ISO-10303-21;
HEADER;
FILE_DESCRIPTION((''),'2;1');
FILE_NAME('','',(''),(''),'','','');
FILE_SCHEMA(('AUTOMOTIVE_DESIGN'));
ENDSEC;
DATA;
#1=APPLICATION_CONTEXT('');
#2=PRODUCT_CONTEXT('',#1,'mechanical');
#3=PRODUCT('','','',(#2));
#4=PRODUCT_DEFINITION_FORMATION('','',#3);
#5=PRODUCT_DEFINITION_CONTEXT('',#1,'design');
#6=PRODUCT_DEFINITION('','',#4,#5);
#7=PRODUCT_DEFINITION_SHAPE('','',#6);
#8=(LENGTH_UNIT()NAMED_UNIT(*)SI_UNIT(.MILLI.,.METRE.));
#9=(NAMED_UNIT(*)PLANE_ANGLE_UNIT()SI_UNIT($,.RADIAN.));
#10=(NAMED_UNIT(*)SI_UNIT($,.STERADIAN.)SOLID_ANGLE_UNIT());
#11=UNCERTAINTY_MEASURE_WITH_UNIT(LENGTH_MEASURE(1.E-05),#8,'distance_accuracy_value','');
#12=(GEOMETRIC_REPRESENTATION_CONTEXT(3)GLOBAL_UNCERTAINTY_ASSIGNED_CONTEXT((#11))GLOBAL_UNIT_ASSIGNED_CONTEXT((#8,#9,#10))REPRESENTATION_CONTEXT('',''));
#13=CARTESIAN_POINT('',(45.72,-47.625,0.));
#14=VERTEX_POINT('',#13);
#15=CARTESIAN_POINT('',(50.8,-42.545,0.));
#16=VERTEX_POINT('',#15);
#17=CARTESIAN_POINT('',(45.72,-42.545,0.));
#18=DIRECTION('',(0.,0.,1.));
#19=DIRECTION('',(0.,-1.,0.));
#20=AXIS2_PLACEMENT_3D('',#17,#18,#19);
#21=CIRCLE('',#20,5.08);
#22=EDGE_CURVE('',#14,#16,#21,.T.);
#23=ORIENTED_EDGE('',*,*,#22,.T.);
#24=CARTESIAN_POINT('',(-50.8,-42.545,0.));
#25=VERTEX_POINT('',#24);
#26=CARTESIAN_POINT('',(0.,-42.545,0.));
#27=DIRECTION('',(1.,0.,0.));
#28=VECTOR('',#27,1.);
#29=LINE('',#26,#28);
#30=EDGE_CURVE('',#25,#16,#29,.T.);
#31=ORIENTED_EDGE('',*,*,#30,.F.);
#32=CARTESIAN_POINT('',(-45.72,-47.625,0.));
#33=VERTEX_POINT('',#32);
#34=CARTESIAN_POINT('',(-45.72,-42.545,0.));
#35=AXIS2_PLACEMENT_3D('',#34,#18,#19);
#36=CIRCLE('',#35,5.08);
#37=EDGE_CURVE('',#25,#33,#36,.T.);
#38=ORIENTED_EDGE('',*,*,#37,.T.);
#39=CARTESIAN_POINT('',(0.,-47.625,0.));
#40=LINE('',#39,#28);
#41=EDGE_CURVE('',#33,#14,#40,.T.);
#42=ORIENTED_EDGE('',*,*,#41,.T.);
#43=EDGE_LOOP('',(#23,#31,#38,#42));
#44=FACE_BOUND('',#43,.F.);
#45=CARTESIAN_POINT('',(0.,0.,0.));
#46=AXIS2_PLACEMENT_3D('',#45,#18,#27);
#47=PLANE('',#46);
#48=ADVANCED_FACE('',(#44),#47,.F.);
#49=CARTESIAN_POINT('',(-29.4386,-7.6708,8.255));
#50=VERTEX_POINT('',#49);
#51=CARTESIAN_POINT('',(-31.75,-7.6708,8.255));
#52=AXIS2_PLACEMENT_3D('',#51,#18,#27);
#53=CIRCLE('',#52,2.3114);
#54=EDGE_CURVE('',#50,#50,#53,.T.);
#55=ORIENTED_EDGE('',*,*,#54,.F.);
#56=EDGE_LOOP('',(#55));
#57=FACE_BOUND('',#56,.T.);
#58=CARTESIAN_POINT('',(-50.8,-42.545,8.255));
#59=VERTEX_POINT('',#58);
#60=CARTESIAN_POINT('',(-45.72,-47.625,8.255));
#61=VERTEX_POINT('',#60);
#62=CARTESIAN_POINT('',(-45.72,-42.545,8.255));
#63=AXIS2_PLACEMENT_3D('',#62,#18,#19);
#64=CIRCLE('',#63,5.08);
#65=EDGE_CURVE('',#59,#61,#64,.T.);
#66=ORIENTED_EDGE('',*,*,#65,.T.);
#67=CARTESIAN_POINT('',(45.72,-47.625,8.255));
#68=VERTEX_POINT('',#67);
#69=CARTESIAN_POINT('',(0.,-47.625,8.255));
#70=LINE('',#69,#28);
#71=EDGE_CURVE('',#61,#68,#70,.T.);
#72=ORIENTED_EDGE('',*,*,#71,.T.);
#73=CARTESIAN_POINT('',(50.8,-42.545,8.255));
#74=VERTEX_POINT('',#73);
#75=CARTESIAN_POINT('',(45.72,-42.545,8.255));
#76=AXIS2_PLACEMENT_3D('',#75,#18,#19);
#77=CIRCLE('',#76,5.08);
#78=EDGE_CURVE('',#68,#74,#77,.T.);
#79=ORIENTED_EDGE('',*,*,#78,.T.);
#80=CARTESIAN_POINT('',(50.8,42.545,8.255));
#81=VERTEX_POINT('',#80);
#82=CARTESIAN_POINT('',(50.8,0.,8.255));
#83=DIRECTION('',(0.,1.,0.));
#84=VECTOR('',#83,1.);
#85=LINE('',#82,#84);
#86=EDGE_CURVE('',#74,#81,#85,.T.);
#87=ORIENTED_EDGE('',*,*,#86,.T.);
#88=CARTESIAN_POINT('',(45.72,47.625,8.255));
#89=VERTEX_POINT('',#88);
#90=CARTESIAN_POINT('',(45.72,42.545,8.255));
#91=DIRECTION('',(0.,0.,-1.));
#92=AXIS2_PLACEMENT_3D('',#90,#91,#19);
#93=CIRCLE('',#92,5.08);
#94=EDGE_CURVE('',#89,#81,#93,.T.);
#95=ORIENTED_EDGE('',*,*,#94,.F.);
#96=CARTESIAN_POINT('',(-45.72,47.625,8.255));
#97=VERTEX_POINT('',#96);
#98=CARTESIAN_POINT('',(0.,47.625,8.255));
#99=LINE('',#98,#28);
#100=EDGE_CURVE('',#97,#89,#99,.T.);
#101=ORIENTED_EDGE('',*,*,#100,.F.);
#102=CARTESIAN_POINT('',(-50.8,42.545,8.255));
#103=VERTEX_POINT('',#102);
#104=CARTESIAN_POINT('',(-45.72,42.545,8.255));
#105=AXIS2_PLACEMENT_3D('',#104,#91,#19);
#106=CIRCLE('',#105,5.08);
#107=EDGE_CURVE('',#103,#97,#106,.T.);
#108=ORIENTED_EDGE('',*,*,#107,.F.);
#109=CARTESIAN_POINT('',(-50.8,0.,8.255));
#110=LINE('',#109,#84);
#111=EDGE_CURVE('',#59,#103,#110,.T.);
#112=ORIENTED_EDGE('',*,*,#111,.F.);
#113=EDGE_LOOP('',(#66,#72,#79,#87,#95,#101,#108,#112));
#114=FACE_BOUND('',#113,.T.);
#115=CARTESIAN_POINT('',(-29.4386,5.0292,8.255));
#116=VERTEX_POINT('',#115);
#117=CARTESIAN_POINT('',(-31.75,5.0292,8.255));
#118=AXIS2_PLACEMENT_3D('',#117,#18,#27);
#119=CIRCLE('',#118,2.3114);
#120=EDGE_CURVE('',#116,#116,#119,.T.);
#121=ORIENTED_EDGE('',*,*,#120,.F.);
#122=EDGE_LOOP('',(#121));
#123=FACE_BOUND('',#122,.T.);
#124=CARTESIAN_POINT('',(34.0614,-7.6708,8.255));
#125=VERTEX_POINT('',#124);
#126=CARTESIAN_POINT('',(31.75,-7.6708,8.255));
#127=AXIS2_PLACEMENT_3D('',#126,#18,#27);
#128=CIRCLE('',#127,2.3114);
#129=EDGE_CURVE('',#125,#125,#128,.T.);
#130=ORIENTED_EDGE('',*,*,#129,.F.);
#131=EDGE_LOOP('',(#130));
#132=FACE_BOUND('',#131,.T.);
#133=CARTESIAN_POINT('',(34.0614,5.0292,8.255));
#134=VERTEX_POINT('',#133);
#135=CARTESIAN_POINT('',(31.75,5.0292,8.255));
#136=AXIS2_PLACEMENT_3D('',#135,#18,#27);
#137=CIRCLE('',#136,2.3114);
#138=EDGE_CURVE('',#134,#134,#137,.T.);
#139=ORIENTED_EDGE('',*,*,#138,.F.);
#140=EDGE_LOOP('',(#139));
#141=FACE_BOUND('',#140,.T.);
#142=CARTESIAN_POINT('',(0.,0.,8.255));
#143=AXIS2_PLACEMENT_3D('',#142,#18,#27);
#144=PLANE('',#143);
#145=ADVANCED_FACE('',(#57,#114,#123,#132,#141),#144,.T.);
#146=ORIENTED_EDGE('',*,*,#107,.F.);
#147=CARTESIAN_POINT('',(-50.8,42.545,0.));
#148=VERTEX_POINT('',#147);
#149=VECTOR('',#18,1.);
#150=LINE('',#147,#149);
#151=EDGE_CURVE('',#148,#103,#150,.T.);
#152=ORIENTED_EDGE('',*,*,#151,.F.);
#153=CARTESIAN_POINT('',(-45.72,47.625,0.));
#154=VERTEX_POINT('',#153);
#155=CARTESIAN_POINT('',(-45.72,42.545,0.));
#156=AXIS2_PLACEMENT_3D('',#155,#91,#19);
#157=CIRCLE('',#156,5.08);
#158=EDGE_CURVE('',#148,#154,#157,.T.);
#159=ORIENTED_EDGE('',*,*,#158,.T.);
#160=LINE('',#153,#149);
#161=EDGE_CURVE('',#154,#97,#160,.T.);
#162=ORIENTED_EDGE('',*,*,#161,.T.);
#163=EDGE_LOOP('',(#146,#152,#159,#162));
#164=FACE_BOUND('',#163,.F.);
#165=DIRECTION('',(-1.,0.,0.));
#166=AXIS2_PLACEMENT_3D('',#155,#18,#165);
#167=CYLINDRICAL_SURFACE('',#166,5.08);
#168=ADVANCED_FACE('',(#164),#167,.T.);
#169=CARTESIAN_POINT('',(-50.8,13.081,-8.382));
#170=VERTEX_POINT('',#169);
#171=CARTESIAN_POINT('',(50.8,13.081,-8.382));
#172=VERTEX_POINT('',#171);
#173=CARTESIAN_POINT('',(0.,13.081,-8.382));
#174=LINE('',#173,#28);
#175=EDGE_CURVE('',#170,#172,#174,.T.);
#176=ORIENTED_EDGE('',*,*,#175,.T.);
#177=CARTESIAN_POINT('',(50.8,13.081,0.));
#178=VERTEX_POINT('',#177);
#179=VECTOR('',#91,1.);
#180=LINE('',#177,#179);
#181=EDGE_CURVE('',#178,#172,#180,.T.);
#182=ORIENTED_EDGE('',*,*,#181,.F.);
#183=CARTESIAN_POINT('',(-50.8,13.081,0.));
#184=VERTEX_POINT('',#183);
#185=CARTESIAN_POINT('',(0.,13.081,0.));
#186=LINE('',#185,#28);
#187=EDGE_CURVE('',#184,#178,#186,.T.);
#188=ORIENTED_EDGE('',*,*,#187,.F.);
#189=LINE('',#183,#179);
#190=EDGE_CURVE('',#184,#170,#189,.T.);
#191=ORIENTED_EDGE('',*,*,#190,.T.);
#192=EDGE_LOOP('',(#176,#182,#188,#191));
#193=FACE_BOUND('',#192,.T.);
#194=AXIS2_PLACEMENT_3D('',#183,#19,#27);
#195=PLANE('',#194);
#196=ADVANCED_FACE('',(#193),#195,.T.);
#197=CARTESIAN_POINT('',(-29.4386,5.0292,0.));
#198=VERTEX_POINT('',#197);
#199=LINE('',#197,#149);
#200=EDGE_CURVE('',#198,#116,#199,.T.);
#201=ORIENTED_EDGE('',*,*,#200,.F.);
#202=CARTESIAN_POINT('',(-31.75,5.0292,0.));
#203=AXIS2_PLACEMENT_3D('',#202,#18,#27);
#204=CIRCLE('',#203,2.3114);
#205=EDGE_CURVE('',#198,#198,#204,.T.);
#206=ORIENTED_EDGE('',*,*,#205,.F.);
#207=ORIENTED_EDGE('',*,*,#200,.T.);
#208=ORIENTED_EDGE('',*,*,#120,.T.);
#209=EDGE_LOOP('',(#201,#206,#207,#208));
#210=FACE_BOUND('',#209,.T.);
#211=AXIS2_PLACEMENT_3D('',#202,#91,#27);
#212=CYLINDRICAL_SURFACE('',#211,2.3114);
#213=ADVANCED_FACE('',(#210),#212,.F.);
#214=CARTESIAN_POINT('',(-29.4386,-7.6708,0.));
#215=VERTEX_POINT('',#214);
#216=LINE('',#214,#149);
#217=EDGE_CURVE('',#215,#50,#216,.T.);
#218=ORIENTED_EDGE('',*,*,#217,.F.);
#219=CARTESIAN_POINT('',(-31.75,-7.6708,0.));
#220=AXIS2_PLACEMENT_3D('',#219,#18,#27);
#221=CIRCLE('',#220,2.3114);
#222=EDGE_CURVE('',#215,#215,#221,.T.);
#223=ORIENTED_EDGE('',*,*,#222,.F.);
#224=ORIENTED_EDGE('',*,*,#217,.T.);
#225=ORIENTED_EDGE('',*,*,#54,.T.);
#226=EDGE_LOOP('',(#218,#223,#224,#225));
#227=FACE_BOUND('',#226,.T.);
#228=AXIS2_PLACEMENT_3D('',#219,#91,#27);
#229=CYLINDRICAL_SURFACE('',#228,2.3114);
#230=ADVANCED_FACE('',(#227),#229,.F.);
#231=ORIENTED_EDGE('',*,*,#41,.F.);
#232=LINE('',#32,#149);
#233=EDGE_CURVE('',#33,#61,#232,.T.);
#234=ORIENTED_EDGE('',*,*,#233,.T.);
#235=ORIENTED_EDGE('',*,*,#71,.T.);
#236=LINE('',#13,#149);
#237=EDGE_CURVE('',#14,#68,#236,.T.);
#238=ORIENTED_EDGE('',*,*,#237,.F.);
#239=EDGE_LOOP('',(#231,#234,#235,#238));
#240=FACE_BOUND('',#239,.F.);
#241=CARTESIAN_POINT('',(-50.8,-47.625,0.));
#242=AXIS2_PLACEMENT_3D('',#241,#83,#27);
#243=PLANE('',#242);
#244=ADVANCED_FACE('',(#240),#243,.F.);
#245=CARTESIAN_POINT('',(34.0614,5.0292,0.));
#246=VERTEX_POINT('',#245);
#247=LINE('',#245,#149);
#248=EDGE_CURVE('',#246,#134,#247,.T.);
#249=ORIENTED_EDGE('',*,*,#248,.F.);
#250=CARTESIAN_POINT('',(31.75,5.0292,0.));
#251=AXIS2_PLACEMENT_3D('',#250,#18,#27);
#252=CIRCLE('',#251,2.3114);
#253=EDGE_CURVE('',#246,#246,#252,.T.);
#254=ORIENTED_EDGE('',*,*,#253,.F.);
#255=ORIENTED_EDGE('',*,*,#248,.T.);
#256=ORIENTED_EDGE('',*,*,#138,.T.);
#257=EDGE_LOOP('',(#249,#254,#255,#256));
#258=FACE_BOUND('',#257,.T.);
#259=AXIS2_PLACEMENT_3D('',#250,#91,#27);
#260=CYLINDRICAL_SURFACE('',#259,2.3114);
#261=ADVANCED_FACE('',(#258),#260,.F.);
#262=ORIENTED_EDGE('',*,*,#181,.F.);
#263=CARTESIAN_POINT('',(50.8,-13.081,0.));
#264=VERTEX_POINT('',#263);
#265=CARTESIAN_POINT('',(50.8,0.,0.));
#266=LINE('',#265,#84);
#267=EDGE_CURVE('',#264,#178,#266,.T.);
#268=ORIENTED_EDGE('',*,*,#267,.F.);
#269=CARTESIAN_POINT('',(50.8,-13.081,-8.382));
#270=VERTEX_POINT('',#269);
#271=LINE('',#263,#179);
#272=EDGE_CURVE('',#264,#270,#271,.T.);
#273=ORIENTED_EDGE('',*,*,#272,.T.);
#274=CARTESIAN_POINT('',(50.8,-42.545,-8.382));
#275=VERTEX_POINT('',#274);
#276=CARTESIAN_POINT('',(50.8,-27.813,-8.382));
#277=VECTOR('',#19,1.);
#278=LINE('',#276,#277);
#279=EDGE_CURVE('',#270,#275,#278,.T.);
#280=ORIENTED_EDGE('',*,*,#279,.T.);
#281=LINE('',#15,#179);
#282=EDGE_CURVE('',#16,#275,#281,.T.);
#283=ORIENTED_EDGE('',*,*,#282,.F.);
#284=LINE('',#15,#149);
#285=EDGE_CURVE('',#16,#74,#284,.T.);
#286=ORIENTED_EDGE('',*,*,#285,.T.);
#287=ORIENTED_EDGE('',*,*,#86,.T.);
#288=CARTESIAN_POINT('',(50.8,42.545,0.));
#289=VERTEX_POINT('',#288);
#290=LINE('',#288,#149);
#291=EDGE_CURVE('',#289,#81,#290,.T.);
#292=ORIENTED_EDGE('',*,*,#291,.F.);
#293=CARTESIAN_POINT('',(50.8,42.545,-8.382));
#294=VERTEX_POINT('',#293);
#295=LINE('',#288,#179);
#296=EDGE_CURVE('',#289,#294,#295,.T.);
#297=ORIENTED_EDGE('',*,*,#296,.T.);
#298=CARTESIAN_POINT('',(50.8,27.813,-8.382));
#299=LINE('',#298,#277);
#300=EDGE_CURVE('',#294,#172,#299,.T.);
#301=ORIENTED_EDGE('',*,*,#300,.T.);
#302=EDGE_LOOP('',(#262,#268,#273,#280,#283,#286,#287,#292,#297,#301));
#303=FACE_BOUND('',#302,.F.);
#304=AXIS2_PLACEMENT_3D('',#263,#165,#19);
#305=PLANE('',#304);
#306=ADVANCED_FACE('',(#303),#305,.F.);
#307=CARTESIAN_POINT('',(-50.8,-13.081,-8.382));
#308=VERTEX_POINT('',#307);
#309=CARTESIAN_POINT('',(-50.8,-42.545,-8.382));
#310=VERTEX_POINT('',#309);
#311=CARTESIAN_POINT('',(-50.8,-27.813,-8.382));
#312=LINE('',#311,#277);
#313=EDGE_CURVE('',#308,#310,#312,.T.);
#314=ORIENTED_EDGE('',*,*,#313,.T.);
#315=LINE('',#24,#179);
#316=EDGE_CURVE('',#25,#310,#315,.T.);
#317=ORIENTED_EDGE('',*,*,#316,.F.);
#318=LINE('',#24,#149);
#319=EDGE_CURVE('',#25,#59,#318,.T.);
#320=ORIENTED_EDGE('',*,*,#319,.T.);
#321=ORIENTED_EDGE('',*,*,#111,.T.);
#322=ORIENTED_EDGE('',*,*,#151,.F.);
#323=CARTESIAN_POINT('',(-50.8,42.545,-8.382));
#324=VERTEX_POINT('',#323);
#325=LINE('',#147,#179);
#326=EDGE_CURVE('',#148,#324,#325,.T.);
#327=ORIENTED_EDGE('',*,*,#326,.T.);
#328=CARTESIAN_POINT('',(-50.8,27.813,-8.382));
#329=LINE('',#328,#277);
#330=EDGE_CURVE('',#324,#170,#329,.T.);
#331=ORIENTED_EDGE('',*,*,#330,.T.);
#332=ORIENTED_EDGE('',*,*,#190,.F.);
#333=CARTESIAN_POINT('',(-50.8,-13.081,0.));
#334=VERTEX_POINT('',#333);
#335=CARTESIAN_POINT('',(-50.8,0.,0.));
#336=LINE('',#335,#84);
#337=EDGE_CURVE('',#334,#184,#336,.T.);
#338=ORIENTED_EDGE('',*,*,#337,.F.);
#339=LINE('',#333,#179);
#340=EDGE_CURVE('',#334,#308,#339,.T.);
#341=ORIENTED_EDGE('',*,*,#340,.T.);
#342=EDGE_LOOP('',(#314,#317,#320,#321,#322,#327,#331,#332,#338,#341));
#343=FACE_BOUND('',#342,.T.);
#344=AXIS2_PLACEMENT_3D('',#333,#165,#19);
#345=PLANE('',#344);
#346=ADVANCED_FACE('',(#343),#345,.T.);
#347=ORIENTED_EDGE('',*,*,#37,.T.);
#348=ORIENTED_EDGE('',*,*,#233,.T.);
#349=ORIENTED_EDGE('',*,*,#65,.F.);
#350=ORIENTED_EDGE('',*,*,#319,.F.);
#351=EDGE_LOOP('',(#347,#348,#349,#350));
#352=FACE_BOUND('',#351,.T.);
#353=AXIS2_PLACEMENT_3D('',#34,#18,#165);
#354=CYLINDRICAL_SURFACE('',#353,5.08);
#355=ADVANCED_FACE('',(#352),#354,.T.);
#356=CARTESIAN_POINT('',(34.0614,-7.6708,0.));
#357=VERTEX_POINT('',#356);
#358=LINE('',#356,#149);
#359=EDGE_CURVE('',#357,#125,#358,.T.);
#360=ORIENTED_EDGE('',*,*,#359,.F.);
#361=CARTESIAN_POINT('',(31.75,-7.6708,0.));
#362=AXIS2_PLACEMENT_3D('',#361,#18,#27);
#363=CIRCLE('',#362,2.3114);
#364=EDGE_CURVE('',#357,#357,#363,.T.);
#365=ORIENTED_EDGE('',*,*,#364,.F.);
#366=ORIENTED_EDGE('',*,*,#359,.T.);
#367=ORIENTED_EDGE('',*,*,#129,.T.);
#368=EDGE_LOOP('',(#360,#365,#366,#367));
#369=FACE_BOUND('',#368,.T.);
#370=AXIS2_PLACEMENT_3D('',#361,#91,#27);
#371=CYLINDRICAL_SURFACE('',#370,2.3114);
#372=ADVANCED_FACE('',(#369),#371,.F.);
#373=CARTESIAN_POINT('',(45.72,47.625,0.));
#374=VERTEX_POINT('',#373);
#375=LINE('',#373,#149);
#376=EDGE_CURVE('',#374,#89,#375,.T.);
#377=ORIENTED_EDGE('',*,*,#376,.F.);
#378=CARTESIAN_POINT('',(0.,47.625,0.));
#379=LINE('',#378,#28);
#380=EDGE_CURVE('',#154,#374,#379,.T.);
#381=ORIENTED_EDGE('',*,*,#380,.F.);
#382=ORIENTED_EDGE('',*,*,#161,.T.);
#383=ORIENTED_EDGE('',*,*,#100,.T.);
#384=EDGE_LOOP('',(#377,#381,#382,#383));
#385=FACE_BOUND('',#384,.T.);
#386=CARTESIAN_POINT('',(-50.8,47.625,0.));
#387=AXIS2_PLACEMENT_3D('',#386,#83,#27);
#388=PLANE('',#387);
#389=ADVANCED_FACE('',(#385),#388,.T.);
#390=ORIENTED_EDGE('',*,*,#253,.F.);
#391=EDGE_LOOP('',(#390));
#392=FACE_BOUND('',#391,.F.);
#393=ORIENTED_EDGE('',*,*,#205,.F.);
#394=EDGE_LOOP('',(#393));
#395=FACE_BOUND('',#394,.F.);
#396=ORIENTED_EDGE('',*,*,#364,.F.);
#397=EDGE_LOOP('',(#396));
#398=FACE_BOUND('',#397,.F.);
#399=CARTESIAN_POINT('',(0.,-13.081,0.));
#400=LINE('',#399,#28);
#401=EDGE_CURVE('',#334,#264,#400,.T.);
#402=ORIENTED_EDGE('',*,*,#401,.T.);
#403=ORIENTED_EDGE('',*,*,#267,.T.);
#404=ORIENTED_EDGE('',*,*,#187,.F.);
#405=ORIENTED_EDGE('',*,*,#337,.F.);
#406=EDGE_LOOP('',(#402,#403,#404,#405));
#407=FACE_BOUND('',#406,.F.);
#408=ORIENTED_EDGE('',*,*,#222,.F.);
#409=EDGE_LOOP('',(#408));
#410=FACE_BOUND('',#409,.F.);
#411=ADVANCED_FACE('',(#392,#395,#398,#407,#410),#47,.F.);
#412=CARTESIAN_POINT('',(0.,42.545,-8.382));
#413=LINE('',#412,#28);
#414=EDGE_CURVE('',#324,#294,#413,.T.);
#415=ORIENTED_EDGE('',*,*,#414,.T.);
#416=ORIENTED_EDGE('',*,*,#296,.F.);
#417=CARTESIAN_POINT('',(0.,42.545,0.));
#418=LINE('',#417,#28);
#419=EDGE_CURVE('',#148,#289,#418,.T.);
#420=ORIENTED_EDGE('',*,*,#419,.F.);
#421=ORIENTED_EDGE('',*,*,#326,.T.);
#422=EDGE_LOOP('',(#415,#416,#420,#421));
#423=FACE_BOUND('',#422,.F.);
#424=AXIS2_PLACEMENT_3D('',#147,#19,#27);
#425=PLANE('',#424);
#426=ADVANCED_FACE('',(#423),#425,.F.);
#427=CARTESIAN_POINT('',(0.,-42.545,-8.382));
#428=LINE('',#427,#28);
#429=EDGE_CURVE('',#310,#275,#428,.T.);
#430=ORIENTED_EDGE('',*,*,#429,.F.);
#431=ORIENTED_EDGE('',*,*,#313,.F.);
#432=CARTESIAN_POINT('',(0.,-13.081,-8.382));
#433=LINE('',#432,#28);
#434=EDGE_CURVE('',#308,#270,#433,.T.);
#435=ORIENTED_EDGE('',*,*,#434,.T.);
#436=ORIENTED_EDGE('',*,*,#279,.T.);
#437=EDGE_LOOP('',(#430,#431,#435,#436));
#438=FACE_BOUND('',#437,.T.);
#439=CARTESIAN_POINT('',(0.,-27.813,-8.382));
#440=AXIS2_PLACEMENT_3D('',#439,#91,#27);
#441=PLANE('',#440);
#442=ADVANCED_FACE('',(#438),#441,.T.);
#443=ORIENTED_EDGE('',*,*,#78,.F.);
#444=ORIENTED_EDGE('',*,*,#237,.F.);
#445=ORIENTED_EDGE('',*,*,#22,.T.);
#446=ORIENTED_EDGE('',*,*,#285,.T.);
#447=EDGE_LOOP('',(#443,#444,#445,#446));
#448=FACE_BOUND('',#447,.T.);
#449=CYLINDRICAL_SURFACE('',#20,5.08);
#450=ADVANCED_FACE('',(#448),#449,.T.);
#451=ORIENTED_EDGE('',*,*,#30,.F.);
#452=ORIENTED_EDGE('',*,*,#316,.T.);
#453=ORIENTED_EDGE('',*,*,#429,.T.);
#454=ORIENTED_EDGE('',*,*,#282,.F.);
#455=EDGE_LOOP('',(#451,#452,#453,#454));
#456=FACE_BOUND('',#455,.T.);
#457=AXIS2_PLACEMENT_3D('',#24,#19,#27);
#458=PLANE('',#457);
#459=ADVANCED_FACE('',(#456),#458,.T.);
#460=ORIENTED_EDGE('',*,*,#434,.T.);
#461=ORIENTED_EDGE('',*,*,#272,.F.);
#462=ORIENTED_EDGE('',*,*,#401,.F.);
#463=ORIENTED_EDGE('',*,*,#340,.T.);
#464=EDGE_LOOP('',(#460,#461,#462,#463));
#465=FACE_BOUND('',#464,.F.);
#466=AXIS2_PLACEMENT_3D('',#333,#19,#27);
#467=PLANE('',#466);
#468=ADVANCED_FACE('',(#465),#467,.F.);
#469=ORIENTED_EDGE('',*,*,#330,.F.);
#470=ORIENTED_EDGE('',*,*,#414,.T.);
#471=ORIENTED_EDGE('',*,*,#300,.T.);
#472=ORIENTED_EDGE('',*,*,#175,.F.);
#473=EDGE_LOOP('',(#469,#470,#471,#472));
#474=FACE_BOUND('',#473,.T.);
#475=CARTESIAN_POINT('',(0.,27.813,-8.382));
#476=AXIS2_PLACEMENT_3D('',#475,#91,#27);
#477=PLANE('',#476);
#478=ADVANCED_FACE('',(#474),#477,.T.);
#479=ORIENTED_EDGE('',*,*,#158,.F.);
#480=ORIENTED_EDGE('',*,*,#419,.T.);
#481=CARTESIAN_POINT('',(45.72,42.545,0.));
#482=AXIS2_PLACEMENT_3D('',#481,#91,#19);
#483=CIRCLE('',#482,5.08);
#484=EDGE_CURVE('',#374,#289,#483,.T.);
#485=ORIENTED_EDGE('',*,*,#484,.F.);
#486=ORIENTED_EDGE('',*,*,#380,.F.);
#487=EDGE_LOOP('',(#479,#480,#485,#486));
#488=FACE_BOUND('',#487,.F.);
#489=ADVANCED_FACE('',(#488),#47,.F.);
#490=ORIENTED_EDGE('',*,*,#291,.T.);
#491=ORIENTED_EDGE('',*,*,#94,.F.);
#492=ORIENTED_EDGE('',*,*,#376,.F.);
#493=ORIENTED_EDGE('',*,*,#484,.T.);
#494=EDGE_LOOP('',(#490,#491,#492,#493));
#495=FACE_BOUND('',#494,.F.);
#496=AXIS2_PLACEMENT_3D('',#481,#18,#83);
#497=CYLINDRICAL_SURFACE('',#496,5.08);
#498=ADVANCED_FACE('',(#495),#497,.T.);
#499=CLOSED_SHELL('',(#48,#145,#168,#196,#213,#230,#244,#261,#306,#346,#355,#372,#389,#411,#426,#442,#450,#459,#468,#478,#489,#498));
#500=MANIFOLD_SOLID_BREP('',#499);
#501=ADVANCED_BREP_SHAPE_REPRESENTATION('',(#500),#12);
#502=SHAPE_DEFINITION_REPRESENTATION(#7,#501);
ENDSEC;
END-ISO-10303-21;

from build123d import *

# Parameters (mm, degrees)
F0_W     = 101.6
F0_H     = 95.25
F0_R     = 2.3114
F1_DEPTH = 8.255
F2_R     = 5.08
F3_W     = 101.6
F3_H     = 29.464
F4_DEPTH = 8.382


# Not quite as in the source:
# - a feature names something its author has since deleted; it is built from what else it names


with BuildPart() as f1:
    # F0 (on Top) → F1 (new body)
    with BuildSketch(Plane.XY):
        Rectangle(F0_W, F0_H)
        Polygon((38.1, -15.24), (0, -15.24), (-38.1, -15.24), (-38.1, 15.24), (-25.4, 15.24), (0, 15.24), (25.4, 15.24), (38.1, 15.24), align=None, mode=Mode.SUBTRACT)
        Polygon((-38.1, -15.24), (0, -15.24), (38.1, -15.24), (38.1, 15.24), (25.4, 15.24), (0, 15.24), (-25.4, 15.24), (-38.1, 15.24), align=None)
        with Locations((-31.75, -7.6708)):
            Circle(F0_R, mode=Mode.SUBTRACT)
        with Locations((31.75, -7.6708)):
            Circle(F0_R, mode=Mode.SUBTRACT)
        with Locations((-31.75, 5.0292)):
            Circle(F0_R, mode=Mode.SUBTRACT)
        with Locations((31.75, 5.0292)):
            Circle(F0_R, mode=Mode.SUBTRACT)
    extrude(amount=F1_DEPTH)

    # F2
    f2_edges = [f1.edges().sort_by_distance(p)[0] for p in [
        (-50.8, 47.625, 4.1275),
        (50.8, 47.625, 4.1275),
        (50.8, -47.625, 4.1275),
        (-50.8, -47.625, 4.1275),
    ]]
    fillet(f2_edges, radius=F2_R)

    # F3 (on face) → F4 (join)
    with BuildSketch(Plane(origin=(0, 0, 0), x_dir=(1, 0, 0), z_dir=(0, 0, -1))):
        with Locations((0, 27.813)):
            Rectangle(F3_W, F3_H)
        with Locations((0, -27.813)):
            Rectangle(F3_W, F3_H)
    extrude(amount=F4_DEPTH)


solid = f1.part
